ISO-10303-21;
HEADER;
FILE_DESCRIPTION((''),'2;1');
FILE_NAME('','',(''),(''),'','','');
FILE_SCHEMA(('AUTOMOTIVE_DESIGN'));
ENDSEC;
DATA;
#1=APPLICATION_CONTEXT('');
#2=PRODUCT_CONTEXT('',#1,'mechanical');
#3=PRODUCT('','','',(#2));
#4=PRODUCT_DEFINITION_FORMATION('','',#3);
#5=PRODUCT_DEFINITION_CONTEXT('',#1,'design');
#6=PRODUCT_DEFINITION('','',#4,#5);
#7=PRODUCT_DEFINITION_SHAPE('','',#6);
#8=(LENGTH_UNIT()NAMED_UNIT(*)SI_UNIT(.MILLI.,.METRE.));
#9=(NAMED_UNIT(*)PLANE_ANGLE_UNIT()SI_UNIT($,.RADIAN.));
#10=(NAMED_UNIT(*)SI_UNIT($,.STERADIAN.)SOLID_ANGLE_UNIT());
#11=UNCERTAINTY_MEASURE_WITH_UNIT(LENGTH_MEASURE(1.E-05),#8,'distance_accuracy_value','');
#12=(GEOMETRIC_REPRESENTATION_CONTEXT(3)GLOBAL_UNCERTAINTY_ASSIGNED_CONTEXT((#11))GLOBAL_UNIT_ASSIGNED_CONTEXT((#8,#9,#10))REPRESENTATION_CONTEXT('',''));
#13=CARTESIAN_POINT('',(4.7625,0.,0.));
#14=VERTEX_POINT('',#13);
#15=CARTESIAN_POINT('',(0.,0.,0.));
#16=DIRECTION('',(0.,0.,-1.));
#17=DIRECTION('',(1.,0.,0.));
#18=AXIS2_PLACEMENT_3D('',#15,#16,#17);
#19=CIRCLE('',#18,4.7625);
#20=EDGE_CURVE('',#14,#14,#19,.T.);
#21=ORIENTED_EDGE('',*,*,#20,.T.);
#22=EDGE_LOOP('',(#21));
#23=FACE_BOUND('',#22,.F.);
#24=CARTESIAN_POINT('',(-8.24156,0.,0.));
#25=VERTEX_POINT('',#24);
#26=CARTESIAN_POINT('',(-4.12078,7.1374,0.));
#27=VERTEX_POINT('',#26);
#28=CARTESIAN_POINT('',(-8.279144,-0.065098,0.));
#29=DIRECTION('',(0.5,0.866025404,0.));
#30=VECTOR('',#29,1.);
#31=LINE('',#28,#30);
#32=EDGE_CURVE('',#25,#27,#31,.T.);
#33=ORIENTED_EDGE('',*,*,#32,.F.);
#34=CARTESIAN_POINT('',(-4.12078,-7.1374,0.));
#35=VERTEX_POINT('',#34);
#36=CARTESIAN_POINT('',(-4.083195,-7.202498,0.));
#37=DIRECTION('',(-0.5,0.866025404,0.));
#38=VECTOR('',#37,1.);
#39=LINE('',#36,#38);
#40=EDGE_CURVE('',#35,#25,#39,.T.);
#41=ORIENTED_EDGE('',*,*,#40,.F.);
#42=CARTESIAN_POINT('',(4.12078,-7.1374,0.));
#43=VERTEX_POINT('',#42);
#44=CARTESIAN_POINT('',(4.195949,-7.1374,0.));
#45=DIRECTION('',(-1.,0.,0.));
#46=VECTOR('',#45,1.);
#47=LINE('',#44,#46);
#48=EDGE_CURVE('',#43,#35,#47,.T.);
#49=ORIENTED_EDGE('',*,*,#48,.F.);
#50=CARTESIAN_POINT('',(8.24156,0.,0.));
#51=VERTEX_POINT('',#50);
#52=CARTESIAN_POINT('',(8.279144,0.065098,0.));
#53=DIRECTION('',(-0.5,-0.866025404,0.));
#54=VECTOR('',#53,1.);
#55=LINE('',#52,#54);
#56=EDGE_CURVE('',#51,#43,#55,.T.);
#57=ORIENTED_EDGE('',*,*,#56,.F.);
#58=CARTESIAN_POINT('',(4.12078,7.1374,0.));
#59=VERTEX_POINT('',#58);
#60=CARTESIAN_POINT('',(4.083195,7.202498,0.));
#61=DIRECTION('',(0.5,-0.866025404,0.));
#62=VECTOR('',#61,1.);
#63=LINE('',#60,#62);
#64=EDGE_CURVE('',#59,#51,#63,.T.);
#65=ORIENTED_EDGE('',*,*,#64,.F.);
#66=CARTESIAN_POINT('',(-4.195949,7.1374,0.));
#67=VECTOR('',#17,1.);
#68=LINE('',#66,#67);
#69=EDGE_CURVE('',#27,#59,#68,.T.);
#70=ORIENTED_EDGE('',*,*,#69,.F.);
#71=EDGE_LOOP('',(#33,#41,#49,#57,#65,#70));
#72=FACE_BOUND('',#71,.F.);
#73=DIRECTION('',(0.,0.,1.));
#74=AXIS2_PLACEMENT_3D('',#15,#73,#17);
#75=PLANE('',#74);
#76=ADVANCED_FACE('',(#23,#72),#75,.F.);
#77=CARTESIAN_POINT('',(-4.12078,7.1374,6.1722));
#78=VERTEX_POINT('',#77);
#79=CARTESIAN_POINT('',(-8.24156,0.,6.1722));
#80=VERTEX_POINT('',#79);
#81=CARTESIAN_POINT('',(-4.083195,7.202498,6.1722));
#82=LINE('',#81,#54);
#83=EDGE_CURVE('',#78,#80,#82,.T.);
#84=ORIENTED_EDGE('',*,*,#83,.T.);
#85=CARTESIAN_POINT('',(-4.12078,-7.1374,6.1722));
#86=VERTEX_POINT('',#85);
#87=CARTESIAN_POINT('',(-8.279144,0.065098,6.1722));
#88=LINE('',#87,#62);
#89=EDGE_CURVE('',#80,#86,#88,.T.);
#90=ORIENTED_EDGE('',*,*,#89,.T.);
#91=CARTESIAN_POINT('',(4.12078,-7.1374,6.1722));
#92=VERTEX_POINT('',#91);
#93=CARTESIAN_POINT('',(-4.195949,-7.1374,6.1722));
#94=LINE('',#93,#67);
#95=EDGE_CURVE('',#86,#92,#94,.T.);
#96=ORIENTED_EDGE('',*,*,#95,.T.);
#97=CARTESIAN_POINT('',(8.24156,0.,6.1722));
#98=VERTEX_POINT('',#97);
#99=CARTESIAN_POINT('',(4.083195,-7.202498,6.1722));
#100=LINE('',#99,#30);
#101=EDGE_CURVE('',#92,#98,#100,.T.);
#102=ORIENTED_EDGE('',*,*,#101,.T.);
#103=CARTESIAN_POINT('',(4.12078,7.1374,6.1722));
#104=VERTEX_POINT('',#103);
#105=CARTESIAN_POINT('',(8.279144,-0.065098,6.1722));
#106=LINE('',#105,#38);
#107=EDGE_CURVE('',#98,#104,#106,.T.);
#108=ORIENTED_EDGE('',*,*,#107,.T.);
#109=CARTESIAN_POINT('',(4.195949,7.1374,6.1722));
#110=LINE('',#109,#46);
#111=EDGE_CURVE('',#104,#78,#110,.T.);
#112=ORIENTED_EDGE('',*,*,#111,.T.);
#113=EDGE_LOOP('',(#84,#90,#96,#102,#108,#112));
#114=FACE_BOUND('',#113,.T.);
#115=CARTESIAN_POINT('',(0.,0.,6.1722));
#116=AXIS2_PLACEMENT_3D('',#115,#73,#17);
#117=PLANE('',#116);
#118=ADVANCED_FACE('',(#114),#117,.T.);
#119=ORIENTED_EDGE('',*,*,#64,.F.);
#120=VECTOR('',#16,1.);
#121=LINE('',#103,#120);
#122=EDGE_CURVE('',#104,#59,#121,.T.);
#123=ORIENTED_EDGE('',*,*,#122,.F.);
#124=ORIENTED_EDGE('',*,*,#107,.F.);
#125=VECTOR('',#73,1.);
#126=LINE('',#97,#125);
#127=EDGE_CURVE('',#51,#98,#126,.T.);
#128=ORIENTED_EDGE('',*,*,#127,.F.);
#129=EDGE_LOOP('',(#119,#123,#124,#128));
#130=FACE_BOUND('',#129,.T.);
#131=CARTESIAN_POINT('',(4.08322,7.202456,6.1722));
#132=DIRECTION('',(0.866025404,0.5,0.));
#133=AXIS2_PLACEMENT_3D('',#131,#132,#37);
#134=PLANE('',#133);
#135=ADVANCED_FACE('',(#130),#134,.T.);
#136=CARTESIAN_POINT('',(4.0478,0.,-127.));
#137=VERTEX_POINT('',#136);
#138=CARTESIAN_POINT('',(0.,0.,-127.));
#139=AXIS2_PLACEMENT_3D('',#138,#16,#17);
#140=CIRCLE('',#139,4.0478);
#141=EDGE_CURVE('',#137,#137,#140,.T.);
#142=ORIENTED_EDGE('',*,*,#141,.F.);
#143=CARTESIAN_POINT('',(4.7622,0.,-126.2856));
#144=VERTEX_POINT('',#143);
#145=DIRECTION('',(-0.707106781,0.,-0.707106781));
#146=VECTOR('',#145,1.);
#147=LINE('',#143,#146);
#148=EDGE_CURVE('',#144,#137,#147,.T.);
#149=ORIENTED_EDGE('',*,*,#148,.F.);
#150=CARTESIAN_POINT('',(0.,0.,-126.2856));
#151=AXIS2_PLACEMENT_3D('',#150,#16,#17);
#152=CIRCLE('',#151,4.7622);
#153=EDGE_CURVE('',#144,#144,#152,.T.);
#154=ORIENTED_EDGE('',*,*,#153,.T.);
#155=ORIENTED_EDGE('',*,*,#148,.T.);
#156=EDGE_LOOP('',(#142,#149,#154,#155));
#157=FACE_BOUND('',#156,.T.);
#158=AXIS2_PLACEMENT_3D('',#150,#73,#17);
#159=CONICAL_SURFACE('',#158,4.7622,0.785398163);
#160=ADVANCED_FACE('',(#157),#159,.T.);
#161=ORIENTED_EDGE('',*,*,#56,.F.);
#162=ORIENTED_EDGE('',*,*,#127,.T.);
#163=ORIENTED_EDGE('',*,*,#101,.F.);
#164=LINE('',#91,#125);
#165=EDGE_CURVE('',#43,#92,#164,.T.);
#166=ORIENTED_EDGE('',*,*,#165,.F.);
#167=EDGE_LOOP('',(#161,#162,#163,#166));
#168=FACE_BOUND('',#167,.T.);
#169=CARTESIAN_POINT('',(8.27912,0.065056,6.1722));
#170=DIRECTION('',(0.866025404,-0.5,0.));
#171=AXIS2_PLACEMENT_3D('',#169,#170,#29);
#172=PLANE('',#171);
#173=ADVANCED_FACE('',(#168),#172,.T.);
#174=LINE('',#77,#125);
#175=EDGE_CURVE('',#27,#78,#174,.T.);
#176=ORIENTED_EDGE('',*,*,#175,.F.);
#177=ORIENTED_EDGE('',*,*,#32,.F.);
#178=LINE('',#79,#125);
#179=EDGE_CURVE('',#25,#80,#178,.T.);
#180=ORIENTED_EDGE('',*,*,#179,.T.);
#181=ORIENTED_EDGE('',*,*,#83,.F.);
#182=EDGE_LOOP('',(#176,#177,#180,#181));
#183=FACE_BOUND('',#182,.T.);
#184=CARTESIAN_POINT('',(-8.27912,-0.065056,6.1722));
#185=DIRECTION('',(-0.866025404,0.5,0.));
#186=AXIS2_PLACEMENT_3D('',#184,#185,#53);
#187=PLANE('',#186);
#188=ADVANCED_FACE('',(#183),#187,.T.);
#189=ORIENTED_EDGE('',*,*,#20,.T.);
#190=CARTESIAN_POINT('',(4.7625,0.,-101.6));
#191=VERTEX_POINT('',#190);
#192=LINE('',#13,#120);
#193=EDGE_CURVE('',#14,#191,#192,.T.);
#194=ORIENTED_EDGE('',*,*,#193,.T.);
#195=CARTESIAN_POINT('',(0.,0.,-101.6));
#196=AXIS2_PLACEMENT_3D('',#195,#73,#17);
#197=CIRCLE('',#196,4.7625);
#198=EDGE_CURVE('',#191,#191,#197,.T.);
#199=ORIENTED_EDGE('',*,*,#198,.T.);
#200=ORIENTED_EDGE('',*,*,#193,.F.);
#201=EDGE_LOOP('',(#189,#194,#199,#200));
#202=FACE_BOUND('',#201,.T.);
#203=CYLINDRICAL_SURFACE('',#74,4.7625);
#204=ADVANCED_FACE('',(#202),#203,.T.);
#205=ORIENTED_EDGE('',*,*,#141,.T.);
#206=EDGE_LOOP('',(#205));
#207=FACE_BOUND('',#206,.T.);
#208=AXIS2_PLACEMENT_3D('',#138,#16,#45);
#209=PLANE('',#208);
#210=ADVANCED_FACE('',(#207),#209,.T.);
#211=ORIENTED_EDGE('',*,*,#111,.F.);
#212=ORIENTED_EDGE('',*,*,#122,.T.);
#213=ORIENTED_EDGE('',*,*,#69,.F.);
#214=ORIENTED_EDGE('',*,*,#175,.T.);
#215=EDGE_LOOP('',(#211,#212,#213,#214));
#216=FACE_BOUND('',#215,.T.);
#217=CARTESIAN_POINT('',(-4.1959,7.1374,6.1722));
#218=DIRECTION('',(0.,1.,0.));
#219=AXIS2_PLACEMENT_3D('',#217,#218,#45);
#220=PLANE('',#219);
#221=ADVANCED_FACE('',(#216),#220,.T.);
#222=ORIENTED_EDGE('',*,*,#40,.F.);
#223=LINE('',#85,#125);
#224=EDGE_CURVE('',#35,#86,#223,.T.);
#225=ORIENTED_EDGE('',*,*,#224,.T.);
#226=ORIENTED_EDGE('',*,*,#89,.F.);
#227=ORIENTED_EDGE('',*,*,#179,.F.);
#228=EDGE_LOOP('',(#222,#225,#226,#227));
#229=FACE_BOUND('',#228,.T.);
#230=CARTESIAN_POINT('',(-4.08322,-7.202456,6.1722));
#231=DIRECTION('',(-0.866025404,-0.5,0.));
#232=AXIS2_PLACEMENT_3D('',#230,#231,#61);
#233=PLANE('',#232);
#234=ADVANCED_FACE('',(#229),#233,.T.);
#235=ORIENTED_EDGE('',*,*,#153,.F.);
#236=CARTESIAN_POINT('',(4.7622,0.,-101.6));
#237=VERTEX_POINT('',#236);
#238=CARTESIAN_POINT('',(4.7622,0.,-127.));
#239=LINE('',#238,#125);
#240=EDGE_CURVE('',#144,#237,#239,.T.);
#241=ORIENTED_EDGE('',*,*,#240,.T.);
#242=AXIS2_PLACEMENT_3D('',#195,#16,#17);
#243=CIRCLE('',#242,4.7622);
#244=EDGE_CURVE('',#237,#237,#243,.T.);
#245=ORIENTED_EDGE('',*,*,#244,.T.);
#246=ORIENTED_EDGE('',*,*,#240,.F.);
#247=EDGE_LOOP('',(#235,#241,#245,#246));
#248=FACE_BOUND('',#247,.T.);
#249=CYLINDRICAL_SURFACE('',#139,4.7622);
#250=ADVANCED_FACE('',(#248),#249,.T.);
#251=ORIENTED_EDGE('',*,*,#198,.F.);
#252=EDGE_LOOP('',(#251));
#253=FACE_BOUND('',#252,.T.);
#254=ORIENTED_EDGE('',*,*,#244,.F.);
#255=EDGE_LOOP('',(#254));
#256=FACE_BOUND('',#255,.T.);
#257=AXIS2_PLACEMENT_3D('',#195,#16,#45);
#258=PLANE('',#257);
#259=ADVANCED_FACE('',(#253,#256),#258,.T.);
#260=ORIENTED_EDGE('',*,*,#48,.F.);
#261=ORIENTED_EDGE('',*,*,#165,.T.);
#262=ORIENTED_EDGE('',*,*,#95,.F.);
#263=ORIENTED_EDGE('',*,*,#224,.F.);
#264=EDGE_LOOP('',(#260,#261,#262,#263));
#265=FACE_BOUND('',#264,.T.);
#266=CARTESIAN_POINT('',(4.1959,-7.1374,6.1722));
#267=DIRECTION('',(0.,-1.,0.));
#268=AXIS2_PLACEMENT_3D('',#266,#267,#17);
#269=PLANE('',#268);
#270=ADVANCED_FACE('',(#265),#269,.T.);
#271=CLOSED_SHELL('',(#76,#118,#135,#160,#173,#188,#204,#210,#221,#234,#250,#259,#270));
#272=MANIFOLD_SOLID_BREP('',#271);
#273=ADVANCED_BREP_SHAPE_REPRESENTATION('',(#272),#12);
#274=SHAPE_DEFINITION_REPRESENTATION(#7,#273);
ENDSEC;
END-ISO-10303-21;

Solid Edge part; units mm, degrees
sketch "Sketch1" plane through (0, 0, 0) normal (0, 0, 1) x (1, 0, 0)
  circle A0 centre (0, 0) radius 8.2794
  dimension "D1" = 16.5588
extrude "Protrusion1" add sketch "Sketch1" along normal blind 6.1722
sketch "Sketch2" plane through (0, 0, 0) normal (0, 0, -1) x (1, 0, 0)
  circle A0 centre (0, 0) radius 4.7625
extrude "Protrusion2" add sketch "Sketch2" along normal blind 127
sketch "Sketch3" plane through (0, 0, -127) normal (0, 0, -1) x (1, 0, 0)
  circle A0 centre (0, 0) radius 4.7622
extrude "Cutout1" cut sketch "Sketch3" against normal blind 25.4 flip side to cut
chamfer "Chamfer_1" distance 0.7144 angle 45 1 edges at (-4.7622, 0, -127)
sketch "Sketch4" plane through (0, 0, 6.1722) normal (0, 0, 1) x (1, 0, 0)
  line L0 (-4.1959, 7.1374) -> (4.1959, 7.1374)
  dimension "D1" = 14.2748
extrude "Cutout2" cut sketch "Sketch4" against normal up to next material side at (0, 7.1874, 6.1722)
pattern_circular "Pattern1" count 6 over 360 about axis through (0, 0, 6.1722) along (0, 0, 1) of "Cutout2"
properties part number "119180"
